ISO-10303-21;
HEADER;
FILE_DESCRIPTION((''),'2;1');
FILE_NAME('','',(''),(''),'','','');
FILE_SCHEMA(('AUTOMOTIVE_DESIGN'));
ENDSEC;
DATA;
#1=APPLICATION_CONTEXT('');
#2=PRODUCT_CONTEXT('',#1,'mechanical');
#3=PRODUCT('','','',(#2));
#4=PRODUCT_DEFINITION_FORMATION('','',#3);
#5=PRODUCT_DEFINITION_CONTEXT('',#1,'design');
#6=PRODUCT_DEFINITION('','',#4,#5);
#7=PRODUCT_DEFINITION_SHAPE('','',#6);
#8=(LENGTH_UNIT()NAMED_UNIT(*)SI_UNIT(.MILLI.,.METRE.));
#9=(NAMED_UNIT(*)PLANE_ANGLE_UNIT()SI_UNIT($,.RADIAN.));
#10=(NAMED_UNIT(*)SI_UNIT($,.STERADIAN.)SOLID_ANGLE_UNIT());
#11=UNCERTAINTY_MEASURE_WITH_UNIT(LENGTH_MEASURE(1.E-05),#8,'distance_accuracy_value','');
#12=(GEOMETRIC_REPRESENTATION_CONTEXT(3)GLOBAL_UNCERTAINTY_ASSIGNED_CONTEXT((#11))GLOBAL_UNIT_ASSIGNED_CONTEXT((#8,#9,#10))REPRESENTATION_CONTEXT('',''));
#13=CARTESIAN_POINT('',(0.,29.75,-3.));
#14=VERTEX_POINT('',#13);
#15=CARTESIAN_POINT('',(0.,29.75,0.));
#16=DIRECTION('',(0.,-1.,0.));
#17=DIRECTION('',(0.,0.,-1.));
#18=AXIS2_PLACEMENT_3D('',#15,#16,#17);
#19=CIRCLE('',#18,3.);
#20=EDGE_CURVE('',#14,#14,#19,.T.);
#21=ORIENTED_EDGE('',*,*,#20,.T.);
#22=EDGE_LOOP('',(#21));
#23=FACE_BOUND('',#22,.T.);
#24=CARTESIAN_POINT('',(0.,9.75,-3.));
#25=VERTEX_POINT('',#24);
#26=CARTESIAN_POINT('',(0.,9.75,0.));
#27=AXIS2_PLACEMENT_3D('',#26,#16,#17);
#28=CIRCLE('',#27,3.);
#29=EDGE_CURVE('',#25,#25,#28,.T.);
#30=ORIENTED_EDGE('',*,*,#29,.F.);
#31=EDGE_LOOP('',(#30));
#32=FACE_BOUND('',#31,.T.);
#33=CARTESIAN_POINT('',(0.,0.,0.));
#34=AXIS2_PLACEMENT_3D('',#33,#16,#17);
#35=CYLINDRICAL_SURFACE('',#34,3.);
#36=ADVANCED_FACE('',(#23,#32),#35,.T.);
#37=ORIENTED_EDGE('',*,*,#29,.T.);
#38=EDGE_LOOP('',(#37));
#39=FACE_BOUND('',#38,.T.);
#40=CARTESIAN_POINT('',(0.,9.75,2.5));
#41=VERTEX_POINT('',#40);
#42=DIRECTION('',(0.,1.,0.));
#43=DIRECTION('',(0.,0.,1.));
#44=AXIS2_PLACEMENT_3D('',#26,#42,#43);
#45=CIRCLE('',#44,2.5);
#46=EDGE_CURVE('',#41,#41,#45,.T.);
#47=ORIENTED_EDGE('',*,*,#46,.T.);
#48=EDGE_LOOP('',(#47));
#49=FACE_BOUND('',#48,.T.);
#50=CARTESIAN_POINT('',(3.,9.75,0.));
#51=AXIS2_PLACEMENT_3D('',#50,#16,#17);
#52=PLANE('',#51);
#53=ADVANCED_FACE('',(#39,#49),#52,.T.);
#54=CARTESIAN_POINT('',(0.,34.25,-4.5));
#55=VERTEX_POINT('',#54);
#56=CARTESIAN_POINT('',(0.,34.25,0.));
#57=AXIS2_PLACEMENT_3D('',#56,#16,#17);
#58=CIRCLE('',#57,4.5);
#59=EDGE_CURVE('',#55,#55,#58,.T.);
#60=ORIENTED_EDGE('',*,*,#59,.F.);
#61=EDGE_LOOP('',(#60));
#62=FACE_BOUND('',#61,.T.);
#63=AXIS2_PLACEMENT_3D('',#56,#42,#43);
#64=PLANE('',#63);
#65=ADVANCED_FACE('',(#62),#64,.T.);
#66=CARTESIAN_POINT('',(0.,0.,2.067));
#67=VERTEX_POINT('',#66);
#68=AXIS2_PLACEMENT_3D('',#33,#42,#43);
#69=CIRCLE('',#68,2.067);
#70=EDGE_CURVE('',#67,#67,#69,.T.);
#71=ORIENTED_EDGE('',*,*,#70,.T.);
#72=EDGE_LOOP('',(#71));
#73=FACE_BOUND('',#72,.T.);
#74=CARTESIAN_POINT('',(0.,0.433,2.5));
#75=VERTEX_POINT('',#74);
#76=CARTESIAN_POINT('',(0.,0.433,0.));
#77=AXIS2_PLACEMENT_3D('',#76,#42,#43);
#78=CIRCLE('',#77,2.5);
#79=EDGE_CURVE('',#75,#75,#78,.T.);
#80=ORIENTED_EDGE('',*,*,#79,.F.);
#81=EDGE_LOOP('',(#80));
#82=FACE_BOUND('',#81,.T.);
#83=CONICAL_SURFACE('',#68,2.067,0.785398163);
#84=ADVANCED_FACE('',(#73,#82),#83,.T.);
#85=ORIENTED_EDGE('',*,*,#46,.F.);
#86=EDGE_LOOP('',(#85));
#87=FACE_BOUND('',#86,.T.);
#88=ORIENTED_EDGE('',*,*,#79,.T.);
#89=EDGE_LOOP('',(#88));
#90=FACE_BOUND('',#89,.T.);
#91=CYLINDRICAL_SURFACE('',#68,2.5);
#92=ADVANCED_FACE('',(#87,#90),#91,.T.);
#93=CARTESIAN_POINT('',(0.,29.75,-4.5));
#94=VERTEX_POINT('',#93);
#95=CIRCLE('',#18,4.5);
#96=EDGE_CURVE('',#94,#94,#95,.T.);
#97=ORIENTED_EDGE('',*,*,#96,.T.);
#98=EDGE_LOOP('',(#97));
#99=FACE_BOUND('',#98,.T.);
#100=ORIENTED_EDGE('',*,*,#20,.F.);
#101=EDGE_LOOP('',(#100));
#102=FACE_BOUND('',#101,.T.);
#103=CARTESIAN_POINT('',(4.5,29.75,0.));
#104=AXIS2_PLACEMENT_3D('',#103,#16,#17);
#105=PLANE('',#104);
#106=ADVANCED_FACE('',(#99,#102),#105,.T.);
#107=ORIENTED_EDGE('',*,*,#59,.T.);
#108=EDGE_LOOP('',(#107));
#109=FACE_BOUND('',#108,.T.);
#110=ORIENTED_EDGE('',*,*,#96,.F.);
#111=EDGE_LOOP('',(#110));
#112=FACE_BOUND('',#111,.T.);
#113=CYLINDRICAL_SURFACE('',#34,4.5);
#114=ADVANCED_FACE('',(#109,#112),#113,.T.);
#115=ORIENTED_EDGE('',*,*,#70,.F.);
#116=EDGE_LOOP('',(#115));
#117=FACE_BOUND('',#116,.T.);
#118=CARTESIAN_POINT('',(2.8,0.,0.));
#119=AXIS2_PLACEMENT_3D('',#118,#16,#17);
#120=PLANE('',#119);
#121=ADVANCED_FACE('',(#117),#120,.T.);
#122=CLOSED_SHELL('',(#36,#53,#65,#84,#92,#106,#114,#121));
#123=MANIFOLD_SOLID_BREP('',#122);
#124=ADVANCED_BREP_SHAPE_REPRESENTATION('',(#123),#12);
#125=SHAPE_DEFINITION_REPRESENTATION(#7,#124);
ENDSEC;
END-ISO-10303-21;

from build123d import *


# Read off the part's stored shape, not the designer's step: M5 机械螺纹 螺柱1
with BuildPart() as part:
    # 草图1 → 旋转1 (revolve)
    with BuildSketch(Plane.XY, mode=Mode.PRIVATE) as revolve_1_sk:
        Polygon((0, 0), (0, 34.25), (4.5, 34.25), (4.5, 29.75), (3, 29.75), (3, 9.75), (2.8, 9.75), (2.8, 0), align=None)
    revolve(revolve_1_sk.sketch.rotate(Axis((0, 0, 0), (0, 1, 0)), 90), axis=Axis((0, 0, 0), (0, 1, 0)))

    # M5 机械螺纹 螺柱1 outline → M5 机械螺纹 螺柱1 (revolve, cut)
    with BuildSketch(Plane.XY):
        Polygon((2.8, 9.75), (2.5, 9.75), (2.5, 0.433), (2.067, 0), (2.8, 0), align=None)
    revolve(axis=Axis((0, 0, 0), (0, 1, 0)), mode=Mode.SUBTRACT)


solid = part.part
